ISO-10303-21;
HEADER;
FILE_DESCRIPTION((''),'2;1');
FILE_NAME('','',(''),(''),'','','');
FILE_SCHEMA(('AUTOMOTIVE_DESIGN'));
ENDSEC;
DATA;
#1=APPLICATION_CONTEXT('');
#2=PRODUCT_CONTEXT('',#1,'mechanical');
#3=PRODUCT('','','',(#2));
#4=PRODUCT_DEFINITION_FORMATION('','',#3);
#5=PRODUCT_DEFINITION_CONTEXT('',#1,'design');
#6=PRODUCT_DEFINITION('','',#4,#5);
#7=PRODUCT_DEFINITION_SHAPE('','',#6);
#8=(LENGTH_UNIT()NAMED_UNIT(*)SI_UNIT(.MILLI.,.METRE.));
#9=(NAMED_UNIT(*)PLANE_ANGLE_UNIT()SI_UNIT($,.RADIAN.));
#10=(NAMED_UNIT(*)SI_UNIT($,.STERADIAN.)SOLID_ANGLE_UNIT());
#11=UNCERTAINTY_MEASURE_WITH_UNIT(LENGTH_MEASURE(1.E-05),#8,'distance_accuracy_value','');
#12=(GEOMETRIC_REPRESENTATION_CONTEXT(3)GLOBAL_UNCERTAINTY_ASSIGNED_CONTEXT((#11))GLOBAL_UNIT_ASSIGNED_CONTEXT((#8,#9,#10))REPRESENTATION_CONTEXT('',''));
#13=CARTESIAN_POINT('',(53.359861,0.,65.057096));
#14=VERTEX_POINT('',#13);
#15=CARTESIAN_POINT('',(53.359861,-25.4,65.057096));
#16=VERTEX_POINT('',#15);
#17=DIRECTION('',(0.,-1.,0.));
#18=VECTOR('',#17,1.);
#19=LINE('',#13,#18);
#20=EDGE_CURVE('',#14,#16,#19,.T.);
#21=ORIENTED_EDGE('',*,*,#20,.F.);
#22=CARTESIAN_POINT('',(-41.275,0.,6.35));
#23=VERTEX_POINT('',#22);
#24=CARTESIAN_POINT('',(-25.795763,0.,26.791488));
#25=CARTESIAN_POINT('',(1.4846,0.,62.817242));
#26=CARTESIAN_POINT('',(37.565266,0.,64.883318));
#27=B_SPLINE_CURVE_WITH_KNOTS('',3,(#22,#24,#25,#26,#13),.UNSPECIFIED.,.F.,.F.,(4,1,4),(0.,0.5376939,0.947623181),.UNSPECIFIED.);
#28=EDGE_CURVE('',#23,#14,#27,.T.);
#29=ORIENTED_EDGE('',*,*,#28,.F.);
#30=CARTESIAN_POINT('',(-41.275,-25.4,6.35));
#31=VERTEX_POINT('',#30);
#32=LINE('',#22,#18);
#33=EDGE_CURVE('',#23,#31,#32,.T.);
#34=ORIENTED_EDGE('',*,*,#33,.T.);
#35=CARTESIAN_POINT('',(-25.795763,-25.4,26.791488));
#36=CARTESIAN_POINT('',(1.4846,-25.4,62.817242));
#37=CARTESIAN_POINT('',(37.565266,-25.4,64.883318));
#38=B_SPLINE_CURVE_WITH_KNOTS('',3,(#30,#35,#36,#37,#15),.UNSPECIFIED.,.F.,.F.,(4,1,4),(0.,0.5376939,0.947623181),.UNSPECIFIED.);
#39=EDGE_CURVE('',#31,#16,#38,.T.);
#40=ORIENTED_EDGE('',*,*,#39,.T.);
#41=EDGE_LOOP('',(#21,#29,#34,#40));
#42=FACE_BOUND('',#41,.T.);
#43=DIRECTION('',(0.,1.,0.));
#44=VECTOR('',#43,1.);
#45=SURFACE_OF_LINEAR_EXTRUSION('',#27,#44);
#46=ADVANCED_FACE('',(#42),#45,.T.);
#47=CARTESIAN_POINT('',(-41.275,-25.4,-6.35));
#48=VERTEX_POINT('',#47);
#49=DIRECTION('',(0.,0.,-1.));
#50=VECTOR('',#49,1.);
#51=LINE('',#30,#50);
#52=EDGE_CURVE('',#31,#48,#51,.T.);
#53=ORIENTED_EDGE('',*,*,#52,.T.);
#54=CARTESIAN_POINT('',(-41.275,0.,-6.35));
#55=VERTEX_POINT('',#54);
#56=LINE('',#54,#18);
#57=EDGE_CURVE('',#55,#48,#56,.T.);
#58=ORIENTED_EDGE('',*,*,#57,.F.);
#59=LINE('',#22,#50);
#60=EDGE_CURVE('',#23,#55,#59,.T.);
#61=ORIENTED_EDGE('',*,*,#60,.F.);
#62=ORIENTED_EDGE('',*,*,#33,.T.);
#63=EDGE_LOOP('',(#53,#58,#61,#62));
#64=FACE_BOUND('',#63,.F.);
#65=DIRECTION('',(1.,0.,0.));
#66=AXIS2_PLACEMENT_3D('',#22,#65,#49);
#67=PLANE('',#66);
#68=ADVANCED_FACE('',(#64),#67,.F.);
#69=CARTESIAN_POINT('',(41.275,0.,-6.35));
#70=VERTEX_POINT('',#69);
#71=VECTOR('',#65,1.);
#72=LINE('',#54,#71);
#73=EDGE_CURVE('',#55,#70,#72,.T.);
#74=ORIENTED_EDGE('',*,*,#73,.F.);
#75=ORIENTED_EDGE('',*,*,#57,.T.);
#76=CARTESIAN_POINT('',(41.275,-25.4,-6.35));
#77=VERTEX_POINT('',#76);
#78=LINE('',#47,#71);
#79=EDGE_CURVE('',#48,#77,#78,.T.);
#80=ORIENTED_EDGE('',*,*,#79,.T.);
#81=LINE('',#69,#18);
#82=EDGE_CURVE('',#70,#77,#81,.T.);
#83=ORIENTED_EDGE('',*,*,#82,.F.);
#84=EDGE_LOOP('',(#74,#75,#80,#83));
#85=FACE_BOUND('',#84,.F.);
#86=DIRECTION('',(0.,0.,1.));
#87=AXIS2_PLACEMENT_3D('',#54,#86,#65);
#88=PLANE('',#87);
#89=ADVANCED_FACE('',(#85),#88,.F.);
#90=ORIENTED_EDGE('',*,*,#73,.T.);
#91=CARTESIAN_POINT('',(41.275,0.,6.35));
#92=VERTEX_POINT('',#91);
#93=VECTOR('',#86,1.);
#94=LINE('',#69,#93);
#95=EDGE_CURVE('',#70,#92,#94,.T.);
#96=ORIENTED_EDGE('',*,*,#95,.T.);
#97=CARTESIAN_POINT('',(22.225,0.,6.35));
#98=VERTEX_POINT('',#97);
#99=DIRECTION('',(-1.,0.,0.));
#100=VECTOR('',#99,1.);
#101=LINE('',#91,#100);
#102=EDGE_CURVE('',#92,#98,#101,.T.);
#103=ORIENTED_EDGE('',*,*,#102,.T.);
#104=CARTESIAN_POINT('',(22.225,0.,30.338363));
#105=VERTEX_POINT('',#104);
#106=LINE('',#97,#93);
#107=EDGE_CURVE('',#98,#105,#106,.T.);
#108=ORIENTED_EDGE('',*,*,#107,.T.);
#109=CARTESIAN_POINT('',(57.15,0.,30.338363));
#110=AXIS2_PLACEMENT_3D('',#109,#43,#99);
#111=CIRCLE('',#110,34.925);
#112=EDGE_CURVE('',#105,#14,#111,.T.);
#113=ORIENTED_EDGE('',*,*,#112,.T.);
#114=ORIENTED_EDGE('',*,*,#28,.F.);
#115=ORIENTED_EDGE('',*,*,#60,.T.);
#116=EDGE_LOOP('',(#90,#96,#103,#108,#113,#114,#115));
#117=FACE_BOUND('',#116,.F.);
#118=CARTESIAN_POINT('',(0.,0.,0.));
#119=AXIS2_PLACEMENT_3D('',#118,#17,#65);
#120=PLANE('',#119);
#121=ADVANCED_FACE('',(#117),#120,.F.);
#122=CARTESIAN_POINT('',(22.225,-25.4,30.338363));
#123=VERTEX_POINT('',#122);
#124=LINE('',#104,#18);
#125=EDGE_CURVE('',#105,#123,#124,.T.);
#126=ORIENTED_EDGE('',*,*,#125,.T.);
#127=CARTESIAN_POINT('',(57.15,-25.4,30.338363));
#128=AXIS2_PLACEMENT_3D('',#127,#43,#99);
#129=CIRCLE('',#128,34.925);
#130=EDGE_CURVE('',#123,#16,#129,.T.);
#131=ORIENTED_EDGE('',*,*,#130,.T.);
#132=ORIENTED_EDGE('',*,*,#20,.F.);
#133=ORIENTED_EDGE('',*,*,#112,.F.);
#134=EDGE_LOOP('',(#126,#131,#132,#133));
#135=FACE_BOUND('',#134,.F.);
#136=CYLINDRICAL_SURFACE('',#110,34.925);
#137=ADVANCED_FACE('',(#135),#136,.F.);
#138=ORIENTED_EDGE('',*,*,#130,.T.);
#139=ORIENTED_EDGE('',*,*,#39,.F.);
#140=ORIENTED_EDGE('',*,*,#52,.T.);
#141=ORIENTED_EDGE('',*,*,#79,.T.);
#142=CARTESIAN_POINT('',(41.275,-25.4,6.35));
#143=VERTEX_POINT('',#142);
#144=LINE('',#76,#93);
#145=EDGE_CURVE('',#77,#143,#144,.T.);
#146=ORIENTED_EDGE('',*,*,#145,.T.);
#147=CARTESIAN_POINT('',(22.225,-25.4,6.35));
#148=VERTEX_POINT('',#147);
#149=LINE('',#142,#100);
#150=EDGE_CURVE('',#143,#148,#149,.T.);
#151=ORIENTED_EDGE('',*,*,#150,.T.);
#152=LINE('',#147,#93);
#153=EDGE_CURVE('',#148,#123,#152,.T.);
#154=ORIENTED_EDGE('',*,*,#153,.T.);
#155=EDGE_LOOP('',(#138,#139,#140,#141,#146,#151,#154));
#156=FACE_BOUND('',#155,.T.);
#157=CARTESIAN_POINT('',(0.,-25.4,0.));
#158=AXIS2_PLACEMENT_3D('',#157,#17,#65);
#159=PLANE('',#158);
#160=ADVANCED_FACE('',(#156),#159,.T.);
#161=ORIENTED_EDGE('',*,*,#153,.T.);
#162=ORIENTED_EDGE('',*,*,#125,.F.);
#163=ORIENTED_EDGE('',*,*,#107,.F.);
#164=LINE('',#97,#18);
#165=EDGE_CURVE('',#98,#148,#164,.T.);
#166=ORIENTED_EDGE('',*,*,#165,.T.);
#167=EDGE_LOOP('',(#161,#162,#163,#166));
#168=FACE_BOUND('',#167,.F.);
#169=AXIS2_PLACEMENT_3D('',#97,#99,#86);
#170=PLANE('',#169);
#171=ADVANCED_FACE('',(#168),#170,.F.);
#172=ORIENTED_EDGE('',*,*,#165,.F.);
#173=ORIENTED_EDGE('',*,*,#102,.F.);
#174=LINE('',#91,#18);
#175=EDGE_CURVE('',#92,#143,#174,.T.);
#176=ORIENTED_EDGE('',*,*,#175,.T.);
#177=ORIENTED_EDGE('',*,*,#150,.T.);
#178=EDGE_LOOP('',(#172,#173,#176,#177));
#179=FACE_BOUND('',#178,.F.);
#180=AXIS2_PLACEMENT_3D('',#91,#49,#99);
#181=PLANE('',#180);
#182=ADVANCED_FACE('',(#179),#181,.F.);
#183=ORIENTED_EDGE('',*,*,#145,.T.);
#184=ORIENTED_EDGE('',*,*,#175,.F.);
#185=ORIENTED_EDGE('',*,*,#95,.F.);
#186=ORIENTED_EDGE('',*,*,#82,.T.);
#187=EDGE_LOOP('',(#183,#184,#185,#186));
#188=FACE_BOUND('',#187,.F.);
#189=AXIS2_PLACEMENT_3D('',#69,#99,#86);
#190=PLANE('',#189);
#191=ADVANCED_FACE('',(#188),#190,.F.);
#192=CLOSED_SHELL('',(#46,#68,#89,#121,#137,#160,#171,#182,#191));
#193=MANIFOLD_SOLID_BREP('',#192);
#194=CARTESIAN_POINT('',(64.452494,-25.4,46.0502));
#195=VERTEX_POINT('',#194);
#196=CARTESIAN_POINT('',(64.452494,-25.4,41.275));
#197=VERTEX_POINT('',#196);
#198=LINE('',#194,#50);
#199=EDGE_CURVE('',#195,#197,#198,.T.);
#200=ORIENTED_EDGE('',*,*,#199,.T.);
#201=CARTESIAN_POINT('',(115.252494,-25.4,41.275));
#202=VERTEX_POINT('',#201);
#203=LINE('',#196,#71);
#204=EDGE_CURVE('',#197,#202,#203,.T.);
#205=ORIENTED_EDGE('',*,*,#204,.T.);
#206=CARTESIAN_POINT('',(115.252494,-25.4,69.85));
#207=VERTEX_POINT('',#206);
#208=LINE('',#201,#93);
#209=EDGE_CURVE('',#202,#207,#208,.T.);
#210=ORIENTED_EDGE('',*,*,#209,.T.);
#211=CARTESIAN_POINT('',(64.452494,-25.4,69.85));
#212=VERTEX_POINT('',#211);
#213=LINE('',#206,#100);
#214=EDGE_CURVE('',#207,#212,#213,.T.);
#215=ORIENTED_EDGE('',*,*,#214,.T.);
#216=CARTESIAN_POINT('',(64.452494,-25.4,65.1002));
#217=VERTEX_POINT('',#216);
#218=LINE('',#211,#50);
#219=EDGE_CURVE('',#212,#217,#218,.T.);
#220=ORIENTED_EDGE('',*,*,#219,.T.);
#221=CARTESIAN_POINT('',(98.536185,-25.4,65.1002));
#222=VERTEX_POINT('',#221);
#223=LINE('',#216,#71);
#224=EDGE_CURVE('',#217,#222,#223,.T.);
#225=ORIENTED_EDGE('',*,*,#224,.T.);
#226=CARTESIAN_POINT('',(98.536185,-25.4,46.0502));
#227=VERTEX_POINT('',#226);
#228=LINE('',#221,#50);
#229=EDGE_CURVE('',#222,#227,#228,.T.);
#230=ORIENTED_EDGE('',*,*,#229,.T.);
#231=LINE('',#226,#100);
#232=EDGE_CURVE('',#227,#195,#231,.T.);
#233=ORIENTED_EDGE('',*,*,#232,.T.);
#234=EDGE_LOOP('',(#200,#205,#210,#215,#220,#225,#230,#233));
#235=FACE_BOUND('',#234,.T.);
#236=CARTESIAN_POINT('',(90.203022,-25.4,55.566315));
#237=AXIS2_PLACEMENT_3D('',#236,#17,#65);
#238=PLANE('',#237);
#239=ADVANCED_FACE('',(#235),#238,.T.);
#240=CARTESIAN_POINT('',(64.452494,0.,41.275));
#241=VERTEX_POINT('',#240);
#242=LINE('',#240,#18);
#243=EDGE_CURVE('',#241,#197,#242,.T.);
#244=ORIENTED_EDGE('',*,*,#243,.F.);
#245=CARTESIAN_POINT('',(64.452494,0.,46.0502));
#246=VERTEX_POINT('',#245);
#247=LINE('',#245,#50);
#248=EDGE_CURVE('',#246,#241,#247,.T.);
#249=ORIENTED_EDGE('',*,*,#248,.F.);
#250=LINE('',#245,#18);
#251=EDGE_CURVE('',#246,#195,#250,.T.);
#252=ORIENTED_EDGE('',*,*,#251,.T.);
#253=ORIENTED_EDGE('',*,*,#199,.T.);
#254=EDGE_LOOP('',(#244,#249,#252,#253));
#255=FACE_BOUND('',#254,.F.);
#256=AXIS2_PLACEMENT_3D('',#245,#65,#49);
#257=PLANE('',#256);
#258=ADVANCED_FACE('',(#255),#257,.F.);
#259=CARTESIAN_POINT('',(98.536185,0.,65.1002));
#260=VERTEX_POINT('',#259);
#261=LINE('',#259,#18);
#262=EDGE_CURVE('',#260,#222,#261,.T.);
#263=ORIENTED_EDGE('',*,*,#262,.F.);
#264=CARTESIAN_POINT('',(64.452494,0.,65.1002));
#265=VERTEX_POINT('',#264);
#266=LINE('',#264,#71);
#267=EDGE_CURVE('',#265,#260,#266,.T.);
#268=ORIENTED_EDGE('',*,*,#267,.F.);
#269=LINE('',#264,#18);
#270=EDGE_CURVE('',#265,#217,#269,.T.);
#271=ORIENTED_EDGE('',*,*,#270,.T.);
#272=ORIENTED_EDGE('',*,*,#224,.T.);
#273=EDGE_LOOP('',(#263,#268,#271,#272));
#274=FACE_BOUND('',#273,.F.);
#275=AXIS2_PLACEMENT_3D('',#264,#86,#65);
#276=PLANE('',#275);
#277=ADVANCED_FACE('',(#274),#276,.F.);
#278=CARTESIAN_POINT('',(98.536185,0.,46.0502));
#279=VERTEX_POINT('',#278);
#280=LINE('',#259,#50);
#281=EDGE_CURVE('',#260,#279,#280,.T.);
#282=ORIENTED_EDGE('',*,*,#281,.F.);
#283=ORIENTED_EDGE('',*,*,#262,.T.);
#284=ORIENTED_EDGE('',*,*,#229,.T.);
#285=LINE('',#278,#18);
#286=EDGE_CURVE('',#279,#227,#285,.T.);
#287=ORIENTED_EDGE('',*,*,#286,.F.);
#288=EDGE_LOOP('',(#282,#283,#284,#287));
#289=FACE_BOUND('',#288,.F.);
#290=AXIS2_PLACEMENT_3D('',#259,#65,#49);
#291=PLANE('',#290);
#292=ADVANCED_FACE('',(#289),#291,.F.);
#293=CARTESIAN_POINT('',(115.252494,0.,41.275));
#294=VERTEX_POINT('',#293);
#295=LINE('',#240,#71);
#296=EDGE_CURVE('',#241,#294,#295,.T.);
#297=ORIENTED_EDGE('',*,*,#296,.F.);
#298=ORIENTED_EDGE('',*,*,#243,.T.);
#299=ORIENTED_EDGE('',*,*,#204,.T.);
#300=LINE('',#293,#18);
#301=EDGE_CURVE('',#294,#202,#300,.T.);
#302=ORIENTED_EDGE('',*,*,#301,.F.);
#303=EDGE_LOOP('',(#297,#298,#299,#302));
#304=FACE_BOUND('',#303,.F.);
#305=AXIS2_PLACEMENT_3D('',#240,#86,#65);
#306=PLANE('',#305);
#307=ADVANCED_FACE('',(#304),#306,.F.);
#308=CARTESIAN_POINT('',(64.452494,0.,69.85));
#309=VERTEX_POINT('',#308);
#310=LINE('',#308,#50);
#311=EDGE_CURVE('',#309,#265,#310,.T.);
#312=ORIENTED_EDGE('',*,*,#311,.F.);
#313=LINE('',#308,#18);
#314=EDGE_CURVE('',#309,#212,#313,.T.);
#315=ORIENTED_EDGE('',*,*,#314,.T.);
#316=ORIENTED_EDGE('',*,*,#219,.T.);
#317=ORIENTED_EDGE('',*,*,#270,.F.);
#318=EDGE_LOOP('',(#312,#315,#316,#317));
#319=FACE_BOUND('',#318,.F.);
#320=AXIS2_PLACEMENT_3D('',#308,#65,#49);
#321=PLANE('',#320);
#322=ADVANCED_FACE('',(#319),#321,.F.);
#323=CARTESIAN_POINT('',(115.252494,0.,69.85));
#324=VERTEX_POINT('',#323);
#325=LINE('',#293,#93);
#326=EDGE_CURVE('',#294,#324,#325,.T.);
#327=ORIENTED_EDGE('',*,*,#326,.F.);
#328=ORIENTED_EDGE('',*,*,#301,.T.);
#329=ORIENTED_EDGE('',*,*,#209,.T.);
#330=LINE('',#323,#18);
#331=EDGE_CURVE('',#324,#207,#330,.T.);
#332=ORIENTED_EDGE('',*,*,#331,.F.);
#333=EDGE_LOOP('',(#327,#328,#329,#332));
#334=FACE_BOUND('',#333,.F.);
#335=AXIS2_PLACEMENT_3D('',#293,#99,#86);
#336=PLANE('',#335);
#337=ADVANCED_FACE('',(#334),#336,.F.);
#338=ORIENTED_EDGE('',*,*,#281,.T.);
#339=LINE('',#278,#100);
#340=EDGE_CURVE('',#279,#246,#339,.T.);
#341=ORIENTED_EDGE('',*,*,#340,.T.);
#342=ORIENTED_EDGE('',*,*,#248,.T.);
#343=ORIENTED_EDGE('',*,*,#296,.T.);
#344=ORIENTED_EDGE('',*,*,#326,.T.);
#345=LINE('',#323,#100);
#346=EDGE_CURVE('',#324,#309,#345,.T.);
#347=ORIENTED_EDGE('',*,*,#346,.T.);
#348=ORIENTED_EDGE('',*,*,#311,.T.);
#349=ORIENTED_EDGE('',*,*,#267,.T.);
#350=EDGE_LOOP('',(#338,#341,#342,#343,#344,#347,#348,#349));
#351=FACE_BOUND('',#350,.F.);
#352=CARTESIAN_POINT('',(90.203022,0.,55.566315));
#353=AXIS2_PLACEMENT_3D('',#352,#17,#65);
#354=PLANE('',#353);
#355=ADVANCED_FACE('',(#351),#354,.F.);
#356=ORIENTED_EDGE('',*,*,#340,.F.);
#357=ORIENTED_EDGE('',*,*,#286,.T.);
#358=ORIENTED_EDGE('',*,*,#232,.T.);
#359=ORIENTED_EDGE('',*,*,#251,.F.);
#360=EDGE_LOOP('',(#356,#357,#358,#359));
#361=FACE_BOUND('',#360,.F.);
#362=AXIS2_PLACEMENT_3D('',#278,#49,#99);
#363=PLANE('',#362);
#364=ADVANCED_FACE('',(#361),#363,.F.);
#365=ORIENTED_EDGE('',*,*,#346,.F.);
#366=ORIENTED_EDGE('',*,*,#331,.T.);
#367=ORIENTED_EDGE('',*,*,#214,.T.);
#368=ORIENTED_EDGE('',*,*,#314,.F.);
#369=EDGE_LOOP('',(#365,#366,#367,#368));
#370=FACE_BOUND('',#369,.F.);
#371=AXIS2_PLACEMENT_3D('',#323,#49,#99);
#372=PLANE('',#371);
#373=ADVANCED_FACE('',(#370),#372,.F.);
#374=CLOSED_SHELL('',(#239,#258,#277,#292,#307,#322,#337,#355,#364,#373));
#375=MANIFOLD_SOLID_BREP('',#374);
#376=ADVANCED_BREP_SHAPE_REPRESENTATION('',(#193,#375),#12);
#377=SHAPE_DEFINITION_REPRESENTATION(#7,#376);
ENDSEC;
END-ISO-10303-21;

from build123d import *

# Parameters (mm, degrees)
F1_DEPTH = 25.4


with BuildPart() as f1:
    # F0 (on Front) → F1 (new body)
    with BuildSketch(Plane.XZ):
        Polygon((-41.275, -6.35), (41.275, -6.35), (41.275, 6.35), (22.225, 6.35), (-41.275, 6.35), align=None)
        with BuildLine():
            add(Edge.make_bspline(
                [(-41.275, 6.35), (-25.7957625049, 26.7914881612), (1.4845995339, 62.8172418731), (37.5652658057, 64.8833178289), (53.3598609175, 65.0570964203)],
                knots=[0, 0, 0, 0, 0.5376939005, 0.9476231808, 0.9476231808, 0.9476231808, 0.9476231808], degree=3))
            Line((-41.275, 6.35), (22.225, 6.35))
            Line((22.225, 6.35), (22.225, 30.3383627058))
            ThreePointArc((22.225, 30.3383627058), (31.1487862547, 53.6555775646), (53.3598609175, 65.0570964203))
        make_face()
    extrude(amount=F1_DEPTH)


with BuildPart() as f1b:
    # F0 (on Front) → F1, piece 2 (new body)
    with BuildSketch(Plane.XZ):
        Polygon((98.536185044, 46.0502), (64.4524941912, 46.0502), (64.4524941912, 41.275), (115.2524941912, 41.275), (115.2524941912, 69.85), (64.4524941912, 69.85), (64.4524941912, 65.1002), (98.536185044, 65.1002), align=None)
    extrude(amount=F1_DEPTH)


solid = Compound([f1.part, f1b.part])
